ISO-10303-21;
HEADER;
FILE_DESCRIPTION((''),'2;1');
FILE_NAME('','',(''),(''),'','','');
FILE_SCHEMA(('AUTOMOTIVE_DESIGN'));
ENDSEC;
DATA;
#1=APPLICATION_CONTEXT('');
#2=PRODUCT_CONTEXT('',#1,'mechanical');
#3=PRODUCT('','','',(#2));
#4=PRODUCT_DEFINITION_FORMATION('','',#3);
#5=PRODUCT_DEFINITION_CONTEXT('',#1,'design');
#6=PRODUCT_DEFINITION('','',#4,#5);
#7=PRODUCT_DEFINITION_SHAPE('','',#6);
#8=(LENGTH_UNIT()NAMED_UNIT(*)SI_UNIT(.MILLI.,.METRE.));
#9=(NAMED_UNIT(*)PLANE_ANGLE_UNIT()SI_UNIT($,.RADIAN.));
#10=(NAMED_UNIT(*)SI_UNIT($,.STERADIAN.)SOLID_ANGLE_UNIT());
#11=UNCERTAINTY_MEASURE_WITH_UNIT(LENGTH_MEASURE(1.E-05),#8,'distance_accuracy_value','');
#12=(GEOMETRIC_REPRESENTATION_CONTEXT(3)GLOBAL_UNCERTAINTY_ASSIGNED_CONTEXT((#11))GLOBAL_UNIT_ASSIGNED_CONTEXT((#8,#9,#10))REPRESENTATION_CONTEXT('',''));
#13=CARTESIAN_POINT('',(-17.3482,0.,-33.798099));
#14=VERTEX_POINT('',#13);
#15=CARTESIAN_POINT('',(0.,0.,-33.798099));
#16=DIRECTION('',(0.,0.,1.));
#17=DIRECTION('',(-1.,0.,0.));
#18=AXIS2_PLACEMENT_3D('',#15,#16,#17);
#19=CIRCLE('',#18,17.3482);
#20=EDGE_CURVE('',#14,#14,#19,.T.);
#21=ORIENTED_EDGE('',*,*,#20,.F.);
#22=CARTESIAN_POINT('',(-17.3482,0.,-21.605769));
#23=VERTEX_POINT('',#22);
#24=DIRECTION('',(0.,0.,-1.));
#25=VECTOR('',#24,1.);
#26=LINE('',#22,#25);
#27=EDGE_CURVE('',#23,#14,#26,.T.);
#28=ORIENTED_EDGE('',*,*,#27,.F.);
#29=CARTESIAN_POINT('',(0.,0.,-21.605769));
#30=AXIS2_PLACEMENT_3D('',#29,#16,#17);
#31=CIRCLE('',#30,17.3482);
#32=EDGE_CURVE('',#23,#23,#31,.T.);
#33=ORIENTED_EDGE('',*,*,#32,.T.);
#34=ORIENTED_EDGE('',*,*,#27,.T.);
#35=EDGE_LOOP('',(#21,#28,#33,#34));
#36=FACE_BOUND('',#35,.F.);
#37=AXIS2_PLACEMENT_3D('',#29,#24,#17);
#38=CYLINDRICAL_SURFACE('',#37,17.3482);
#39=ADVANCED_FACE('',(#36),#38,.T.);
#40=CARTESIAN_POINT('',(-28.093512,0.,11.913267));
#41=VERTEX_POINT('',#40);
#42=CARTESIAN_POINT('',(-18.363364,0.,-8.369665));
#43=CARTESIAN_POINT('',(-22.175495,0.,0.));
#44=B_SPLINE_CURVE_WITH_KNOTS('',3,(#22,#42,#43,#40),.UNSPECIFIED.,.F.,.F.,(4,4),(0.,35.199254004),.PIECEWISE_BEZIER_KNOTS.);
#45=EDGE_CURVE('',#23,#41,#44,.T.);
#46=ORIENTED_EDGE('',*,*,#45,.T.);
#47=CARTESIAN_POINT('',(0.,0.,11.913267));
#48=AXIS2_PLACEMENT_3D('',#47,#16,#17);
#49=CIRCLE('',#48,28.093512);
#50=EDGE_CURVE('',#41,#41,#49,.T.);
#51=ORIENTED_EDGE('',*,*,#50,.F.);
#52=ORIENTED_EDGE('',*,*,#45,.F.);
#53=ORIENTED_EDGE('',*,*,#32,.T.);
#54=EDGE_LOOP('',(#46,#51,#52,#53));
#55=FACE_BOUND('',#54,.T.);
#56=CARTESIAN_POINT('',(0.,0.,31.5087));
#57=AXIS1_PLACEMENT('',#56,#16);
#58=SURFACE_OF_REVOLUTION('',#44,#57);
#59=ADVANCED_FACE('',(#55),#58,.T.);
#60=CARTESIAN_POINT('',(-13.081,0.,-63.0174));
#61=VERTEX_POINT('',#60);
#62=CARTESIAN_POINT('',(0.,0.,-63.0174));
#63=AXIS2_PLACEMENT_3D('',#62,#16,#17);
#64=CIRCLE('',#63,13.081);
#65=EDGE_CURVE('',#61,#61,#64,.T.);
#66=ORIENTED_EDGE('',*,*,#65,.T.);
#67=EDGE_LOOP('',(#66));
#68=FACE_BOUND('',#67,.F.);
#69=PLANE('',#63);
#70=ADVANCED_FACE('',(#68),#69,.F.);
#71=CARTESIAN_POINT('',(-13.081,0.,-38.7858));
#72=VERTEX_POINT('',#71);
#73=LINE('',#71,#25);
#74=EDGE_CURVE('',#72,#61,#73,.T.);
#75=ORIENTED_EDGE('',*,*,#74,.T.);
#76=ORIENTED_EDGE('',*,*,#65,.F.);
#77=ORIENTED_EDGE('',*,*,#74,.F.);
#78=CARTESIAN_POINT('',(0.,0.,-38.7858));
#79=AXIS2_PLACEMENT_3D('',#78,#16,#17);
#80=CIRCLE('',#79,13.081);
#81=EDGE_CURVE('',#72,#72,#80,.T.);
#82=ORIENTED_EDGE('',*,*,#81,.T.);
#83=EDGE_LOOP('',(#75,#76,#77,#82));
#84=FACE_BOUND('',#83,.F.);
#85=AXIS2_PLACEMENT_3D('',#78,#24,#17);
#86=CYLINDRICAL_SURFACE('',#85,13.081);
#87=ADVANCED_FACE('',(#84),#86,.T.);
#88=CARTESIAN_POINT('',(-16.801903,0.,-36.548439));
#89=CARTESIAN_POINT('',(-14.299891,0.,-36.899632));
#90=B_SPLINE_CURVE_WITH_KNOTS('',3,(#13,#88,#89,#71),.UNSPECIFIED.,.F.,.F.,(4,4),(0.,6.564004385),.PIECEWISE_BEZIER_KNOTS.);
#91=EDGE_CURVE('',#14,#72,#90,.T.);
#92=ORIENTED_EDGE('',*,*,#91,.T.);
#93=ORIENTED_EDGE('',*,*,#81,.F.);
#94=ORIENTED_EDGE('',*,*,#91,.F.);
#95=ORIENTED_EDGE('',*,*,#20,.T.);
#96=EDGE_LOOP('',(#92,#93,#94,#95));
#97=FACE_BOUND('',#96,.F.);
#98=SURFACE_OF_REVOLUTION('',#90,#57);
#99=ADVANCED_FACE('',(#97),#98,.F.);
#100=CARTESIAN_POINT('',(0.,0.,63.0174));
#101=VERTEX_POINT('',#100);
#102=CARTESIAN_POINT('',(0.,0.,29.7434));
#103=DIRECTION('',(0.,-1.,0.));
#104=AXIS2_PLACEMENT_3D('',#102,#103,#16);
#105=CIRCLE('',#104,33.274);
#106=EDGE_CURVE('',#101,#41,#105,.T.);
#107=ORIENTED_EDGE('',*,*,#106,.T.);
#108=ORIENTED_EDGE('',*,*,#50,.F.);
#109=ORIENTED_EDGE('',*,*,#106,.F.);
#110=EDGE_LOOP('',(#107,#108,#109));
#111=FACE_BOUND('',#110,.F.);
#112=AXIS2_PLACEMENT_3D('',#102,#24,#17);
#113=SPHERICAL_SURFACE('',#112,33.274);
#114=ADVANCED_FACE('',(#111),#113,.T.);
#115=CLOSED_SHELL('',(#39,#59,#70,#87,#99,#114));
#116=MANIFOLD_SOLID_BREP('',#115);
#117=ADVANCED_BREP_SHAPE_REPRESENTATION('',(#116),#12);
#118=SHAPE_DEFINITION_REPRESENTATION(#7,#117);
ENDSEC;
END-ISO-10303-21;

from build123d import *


# Not quite as in the source:
# - a feature names something its author has since deleted; it is built from what else it names


with BuildPart() as f1:
    # F0 (on Front) → F1 (revolve)
    with BuildSketch(Plane.XZ):
        with BuildLine():
            Line((0, -3.5306), (0, 0))
            Line((0, 0), (0, 29.7434))
            Line((0, 29.7434), (0, 63.0174))
            ThreePointArc((0, 63.0174), (-29.1585229497, 45.772736087), (-28.0935123016, 11.9132670067))
            ThreePointArc((-28.0935123016, 11.9132670067), (-16.029336087, 0.5848770503), (0, -3.5306))
        make_face()
        with BuildLine():
            Line((0, -38.7858), (0, -3.5306))
            ThreePointArc((0, -3.5306), (-16.029336087, 0.5848770503), (-28.0935123016, 11.9132670067))
            add(Edge.make_bspline(
                [(-17.3482, -21.60576857), (-18.3633640409, -8.3696646616), (-22.1754945815, 0), (-28.0935123016, 11.9132670067)],
                knots=[0, 0, 0, 0, 35.1992540043, 35.1992540043, 35.1992540043, 35.1992540043], degree=3))
            Line((-17.3482, -21.60576857), (-17.3482, -33.7980993547))
            add(Edge.make_bspline(
                [(-17.3482, -33.7980993547), (-16.8019030243, -36.5484394133), (-14.2998911163, -36.8996322387), (-13.081, -38.7858)],
                knots=[0, 0, 0, 0, 6.5640043851, 6.5640043851, 6.5640043851, 6.5640043851], degree=3))
            Line((-13.081, -38.7858), (-13.081, -63.0174))
            Line((-13.081, -63.0174), (0, -63.0174))
            Line((0, -63.0174), (0, -38.7858))
        make_face()
    revolve(axis=Axis((0, 0, 31.5087), (0, 0, 1)))


solid = f1.part
